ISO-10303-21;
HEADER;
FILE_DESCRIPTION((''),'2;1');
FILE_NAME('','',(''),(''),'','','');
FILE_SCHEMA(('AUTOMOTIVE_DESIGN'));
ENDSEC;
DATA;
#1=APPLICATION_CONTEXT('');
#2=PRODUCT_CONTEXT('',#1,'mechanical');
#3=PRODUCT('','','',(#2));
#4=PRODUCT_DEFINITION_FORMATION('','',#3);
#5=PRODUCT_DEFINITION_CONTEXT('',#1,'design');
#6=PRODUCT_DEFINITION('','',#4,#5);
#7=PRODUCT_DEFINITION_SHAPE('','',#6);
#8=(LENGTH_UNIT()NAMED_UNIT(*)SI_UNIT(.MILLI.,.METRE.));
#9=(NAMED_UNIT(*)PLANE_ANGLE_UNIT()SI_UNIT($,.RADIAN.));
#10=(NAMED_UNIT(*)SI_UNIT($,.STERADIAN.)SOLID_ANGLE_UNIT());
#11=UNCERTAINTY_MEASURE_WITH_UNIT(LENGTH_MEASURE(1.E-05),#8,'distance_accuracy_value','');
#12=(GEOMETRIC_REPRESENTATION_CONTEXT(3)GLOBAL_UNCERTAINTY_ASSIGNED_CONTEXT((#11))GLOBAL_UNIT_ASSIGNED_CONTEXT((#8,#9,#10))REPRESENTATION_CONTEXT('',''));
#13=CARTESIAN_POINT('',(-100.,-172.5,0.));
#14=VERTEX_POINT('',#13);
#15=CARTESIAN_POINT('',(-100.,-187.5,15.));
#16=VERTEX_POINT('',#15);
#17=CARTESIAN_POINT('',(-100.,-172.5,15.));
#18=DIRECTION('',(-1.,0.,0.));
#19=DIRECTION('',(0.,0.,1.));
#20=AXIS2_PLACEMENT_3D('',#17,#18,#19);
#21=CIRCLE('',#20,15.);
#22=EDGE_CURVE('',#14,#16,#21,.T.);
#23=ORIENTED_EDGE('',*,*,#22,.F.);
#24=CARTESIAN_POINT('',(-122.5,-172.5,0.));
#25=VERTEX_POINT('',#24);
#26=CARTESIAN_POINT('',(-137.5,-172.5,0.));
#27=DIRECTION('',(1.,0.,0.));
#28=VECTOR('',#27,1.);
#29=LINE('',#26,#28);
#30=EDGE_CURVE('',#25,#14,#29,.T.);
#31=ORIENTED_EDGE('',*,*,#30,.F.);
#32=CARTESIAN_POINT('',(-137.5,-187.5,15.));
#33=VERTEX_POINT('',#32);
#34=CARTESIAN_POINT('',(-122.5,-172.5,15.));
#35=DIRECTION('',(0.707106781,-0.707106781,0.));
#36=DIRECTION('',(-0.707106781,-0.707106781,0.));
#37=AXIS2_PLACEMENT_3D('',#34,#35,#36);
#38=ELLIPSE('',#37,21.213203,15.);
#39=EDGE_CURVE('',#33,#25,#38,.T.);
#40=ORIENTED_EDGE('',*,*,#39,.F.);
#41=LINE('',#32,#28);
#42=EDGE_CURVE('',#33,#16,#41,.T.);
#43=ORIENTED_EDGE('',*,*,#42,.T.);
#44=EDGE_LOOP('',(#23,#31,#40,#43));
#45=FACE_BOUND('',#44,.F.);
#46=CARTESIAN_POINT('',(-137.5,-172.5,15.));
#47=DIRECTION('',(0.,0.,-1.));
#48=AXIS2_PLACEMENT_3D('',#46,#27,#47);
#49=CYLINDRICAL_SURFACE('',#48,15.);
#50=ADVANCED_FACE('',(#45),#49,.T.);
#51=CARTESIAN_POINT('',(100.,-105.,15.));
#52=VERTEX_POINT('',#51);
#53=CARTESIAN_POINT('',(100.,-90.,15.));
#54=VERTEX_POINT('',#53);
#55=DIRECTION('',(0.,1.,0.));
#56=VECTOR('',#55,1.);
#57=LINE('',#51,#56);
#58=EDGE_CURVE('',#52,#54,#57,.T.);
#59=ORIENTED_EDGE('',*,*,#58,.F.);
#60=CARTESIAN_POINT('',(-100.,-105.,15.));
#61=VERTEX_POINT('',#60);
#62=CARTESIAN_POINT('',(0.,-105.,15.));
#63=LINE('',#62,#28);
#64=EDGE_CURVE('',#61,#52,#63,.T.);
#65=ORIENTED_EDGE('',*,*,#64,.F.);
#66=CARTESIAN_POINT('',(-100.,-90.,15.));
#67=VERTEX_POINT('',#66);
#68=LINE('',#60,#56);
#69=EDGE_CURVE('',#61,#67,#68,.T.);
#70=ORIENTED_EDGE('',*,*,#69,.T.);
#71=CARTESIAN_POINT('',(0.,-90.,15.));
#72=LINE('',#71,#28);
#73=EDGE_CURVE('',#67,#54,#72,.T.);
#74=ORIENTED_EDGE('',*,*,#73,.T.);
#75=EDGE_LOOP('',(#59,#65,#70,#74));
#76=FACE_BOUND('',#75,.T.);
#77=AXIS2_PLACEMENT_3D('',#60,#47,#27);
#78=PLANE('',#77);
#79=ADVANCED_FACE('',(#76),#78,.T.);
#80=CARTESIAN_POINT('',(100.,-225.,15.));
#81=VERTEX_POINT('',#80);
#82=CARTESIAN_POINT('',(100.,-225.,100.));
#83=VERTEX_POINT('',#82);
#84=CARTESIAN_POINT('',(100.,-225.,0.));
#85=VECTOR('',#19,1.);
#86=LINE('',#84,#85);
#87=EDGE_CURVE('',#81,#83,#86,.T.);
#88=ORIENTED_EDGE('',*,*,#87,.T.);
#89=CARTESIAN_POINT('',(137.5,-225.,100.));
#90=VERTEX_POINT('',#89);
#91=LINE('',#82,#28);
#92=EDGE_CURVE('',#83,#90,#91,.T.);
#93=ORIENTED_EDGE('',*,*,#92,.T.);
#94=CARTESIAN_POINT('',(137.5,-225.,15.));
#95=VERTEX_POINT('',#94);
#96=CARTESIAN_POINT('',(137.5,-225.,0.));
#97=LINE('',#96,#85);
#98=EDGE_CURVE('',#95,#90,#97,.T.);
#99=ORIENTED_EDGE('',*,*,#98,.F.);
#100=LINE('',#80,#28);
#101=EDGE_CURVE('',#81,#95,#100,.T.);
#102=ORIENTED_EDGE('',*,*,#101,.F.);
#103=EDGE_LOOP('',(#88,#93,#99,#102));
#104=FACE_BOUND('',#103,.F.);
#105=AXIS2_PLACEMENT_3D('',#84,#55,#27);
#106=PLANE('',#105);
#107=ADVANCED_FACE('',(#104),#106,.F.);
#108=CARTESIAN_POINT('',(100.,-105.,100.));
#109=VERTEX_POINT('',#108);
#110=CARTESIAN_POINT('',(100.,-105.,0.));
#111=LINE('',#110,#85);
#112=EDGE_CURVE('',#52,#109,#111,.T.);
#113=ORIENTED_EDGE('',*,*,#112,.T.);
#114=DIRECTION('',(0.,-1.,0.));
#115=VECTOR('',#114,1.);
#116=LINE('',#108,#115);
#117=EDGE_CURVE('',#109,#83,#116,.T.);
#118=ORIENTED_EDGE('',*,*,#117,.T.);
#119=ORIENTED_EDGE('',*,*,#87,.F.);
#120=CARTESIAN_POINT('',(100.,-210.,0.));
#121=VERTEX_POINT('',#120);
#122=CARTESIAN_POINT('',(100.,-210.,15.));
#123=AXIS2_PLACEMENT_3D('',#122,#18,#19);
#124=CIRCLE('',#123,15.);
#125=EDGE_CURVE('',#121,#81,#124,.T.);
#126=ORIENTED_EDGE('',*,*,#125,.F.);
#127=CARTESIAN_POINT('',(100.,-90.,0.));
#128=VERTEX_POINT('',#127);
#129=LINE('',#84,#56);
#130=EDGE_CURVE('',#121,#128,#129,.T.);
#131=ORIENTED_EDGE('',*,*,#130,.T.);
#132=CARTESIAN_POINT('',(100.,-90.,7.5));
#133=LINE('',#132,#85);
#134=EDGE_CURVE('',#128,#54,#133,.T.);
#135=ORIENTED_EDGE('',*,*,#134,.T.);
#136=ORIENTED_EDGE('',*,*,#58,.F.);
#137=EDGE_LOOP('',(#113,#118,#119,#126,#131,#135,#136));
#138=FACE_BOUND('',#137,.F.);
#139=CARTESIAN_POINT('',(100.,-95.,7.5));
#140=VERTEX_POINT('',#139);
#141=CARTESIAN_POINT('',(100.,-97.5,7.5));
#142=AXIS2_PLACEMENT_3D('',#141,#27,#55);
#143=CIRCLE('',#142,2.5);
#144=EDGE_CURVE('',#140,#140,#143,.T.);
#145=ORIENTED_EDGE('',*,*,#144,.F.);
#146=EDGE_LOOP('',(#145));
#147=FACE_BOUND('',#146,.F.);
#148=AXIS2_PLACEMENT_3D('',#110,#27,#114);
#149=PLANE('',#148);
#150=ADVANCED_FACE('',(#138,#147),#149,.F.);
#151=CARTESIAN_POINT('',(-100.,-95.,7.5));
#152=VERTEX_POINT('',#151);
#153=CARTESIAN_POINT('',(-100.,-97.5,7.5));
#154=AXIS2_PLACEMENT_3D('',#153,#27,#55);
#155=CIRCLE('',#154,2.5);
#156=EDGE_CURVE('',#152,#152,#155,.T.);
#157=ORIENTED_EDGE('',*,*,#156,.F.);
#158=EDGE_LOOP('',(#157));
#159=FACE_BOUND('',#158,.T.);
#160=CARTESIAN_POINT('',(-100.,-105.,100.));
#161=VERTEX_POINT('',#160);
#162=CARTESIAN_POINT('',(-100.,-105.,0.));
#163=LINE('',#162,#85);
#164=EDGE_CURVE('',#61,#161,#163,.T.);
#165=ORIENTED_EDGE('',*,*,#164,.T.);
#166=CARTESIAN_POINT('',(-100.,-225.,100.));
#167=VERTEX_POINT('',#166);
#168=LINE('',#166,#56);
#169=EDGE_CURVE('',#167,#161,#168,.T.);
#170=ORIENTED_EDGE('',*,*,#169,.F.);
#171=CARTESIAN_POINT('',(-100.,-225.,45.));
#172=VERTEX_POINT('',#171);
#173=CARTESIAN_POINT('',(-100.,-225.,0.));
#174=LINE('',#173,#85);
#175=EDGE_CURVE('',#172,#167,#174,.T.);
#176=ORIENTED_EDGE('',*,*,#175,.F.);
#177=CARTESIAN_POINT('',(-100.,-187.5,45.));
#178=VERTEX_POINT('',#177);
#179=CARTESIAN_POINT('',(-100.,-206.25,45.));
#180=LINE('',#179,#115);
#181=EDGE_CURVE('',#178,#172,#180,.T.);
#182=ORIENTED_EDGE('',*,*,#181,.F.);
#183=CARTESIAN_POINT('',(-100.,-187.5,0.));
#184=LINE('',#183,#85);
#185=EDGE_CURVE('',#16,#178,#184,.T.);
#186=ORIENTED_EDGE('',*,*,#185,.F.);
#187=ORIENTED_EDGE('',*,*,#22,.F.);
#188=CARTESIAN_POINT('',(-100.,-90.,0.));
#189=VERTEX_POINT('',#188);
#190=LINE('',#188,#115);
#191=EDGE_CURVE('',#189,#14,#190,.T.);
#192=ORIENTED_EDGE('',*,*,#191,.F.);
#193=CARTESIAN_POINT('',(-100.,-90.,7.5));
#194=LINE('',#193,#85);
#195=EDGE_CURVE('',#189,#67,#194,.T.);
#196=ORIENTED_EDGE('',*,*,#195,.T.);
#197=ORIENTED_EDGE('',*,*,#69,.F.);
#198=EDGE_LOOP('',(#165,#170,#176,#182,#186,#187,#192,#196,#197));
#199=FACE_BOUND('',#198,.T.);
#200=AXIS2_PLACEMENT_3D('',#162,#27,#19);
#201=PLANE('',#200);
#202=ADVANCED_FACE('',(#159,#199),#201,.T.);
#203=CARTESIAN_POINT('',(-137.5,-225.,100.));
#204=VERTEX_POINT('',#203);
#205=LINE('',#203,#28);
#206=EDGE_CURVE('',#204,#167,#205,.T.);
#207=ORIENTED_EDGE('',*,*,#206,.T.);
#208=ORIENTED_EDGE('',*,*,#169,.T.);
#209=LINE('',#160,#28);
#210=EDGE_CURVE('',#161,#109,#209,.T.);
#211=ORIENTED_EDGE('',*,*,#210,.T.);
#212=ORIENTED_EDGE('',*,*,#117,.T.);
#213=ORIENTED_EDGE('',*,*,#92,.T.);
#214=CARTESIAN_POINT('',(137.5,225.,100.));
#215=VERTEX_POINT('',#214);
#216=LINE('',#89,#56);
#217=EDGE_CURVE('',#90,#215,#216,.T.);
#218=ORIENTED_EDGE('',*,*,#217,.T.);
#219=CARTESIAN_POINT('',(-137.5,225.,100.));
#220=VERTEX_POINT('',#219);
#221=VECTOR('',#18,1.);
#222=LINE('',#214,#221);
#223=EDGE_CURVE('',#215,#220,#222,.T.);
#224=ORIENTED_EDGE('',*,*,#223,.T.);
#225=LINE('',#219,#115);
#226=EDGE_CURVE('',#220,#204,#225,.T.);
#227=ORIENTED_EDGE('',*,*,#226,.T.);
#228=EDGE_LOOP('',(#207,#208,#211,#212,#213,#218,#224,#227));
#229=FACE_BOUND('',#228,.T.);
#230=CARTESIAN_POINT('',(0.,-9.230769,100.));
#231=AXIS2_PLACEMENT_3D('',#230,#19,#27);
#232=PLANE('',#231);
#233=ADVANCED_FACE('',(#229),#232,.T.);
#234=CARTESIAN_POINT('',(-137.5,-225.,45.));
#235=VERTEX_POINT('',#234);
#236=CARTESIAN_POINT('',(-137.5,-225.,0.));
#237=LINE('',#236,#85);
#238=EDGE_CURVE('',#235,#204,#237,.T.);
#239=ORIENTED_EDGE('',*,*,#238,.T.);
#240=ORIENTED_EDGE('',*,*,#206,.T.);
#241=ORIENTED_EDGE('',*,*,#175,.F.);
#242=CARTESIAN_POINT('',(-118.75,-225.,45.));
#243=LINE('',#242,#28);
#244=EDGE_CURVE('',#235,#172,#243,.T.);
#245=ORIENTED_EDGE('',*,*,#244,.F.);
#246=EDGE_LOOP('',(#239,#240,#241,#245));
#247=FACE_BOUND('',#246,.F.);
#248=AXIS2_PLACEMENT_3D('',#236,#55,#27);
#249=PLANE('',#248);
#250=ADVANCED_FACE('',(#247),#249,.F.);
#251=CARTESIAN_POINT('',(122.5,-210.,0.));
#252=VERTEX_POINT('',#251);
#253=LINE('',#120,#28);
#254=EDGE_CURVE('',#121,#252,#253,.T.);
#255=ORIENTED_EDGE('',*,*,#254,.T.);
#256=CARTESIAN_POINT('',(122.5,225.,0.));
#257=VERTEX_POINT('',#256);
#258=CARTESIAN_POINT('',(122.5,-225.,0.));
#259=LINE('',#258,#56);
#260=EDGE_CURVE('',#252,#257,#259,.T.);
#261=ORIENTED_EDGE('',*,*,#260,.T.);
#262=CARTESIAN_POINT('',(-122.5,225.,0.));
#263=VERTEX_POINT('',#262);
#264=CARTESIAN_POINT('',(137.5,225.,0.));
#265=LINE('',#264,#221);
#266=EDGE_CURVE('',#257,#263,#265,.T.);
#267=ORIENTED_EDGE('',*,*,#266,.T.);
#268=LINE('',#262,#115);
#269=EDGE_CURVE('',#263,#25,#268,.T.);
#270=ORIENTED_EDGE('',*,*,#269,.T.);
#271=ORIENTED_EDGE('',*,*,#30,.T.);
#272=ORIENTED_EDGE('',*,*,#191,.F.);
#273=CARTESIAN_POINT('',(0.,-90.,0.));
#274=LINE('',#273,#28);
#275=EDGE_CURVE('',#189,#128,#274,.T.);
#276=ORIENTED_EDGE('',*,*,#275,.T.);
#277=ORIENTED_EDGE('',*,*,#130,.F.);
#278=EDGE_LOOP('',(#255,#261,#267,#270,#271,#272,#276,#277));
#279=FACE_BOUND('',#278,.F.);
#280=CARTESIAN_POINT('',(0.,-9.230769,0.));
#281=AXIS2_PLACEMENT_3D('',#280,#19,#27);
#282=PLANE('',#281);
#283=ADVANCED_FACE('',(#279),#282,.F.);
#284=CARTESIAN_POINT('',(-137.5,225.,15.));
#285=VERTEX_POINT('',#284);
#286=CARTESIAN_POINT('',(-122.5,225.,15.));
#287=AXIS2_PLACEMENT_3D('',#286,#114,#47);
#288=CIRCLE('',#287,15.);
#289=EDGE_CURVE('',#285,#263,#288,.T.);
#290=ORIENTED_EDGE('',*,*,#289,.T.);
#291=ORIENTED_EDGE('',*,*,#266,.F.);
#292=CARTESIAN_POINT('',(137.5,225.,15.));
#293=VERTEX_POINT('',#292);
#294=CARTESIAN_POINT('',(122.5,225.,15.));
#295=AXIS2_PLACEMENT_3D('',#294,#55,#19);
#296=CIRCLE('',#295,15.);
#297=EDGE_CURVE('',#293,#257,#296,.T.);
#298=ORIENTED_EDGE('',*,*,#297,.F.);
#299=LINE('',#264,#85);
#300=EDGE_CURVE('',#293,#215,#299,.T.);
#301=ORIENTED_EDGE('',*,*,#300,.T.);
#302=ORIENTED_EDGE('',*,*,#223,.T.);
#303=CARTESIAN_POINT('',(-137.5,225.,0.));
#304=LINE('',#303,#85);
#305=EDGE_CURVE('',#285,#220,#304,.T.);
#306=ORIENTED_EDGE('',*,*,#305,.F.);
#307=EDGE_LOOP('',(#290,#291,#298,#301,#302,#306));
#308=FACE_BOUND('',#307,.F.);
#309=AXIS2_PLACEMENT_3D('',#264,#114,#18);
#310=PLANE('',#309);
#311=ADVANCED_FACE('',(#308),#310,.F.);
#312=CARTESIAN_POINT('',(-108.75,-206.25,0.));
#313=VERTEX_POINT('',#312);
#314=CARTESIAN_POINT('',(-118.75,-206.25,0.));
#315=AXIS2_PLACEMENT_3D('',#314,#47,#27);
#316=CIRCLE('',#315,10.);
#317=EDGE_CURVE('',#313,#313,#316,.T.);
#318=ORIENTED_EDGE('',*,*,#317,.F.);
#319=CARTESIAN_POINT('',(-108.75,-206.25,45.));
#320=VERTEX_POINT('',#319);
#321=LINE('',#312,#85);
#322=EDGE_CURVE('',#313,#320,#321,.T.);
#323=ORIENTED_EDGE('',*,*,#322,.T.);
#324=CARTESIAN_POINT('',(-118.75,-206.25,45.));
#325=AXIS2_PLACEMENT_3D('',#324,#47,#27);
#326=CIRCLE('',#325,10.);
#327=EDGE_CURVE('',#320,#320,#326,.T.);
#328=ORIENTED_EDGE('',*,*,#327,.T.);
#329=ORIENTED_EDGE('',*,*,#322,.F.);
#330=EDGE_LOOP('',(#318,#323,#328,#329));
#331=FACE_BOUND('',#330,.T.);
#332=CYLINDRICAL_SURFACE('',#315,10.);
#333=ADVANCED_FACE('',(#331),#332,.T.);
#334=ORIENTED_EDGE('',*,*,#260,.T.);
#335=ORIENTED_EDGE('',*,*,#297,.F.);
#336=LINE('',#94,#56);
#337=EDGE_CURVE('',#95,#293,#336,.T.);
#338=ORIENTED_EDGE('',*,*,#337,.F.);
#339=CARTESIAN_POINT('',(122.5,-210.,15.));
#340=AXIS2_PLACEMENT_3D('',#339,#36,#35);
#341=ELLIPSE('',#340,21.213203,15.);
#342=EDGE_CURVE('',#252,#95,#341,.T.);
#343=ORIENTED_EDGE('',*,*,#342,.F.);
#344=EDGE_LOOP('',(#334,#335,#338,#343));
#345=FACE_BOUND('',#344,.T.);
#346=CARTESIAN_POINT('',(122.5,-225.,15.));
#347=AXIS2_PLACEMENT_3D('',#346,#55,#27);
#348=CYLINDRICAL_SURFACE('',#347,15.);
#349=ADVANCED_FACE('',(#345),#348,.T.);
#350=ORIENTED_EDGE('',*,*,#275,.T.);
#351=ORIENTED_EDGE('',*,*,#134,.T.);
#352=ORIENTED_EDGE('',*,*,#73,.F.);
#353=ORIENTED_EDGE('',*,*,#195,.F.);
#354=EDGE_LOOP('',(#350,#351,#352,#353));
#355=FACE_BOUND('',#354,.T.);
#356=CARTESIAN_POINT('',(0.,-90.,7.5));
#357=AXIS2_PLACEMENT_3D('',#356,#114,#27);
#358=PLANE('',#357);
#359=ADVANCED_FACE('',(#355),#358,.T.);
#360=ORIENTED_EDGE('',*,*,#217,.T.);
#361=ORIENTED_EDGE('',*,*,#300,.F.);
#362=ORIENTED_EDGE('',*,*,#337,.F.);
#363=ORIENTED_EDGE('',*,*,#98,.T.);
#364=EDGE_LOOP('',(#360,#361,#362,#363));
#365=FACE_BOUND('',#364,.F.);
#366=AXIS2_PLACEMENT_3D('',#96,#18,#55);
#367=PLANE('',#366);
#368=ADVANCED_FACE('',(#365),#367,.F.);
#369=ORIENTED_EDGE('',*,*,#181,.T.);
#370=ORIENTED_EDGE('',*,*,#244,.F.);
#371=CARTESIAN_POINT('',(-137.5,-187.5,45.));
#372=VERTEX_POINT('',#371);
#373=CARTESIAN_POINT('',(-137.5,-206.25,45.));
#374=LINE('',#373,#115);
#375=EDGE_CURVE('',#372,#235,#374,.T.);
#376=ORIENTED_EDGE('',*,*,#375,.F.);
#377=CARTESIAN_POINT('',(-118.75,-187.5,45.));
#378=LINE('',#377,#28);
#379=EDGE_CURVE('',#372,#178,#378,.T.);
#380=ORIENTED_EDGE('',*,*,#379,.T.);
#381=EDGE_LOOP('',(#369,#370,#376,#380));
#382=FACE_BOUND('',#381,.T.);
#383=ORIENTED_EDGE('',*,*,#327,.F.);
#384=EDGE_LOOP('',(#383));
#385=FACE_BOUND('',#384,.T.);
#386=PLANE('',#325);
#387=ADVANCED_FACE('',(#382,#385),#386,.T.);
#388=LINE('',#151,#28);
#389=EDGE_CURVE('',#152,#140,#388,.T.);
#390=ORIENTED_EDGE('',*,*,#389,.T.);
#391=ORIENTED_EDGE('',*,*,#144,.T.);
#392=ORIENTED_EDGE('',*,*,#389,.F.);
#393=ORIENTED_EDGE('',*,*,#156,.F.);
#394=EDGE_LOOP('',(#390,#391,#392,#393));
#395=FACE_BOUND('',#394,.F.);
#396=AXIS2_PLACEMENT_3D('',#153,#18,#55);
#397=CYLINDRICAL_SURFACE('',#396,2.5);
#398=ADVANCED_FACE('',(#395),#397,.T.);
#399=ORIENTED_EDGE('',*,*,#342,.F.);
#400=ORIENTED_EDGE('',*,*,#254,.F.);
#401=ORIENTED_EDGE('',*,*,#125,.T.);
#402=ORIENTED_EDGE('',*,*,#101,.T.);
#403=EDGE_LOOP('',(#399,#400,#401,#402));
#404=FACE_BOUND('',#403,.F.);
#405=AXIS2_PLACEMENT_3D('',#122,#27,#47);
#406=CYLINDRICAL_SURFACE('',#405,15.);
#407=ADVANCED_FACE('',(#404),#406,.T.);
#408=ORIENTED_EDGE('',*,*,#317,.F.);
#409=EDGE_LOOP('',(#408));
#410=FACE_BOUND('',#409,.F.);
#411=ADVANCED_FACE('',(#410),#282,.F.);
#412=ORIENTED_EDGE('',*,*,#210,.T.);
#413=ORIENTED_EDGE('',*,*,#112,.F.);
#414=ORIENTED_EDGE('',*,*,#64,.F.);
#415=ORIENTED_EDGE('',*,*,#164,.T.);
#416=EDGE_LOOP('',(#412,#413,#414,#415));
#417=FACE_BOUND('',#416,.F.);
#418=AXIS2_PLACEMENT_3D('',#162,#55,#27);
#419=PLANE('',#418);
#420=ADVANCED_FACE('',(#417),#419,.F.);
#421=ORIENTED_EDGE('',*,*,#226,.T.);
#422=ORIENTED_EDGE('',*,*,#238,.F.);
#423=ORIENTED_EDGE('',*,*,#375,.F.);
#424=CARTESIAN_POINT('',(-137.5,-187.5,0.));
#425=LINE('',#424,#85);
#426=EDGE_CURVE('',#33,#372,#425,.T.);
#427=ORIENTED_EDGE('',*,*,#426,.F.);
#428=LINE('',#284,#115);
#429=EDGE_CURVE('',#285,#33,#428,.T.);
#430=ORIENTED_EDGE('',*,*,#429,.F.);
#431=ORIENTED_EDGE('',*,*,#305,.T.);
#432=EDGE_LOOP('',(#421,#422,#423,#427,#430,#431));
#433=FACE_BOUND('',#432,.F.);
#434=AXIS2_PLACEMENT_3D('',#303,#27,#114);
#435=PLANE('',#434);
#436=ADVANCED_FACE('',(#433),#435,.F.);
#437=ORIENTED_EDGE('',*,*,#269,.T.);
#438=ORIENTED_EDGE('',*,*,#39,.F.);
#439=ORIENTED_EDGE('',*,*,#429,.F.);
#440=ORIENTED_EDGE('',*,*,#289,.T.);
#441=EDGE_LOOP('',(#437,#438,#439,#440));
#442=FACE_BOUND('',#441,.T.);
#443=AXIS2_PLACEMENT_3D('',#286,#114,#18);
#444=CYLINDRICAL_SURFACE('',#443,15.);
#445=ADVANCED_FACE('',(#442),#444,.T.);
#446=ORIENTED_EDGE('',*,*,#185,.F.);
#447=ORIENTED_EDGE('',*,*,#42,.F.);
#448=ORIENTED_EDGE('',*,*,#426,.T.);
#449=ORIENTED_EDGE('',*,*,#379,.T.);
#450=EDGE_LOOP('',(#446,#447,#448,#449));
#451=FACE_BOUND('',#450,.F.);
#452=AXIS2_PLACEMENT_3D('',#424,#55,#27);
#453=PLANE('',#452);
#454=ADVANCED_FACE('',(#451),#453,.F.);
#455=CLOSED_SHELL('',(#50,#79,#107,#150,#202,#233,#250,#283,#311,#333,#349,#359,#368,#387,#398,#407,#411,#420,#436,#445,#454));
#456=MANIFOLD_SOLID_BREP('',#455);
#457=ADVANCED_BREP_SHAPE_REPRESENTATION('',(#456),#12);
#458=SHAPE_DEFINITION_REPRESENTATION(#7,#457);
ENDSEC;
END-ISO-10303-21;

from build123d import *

# Parameters (mm, degrees)
F1_DEPTH = 100
F2_W     = 37.5
F2_H     = 37.5
F2_R     = 10
F3_DEPTH = 45
F4_W     = 200
F4_H     = 15
F5_DEPTH = 15
F6_R     = 2.5
F7_DEPTH = 200
F8_R     = 15


# Not quite as in the source:
# - a feature of the source that left no trace in its solid (it failed there, or was rolled back) is left out


with BuildPart() as f1:
    # F0 (on Top) → F1 (new body)
    with BuildSketch(Plane.XY):
        Polygon((137.5, 225), (-137.5, 225), (-137.5, -225), (-100, -225), (-100, -105), (100, -105), (100, -225), (137.5, -225), align=None)
    extrude(amount=F1_DEPTH)

    # F2 (on face) → F3 (cut)
    with BuildSketch(Plane(origin=(0, 0, 0), x_dir=(1, 0, 0), z_dir=(0, 0, -1))):
        with Locations((-118.75, 206.25)):
            Rectangle(F2_W, F2_H)
        with Locations((-118.75, 206.25)):
            Circle(F2_R, mode=Mode.SUBTRACT)
    extrude(amount=-F3_DEPTH, mode=Mode.SUBTRACT)

    # F4 (on face) → F5 (cut)
    with BuildSketch(Plane.XZ.offset(105)):
        with Locations((0, 7.5)):
            Rectangle(F4_W, F4_H)
    extrude(amount=-F5_DEPTH, mode=Mode.SUBTRACT)

    # F6 (on face) → F7 (join)
    with BuildSketch(Plane.YZ.offset(-100)):
        with Locations((-97.5, 7.5)):
            Circle(F6_R)
    extrude(amount=F7_DEPTH)

    # F8
    f8_edges = [f1.edges().sort_by_distance(p)[0] for p in [
        (118.75, -225, 0),
        (137.5, 0, 0),
        (-137.5, 18.75, 0),
        (-118.75, -187.5, 0),
    ]]
    fillet(f8_edges, radius=F8_R)


solid = f1.part
